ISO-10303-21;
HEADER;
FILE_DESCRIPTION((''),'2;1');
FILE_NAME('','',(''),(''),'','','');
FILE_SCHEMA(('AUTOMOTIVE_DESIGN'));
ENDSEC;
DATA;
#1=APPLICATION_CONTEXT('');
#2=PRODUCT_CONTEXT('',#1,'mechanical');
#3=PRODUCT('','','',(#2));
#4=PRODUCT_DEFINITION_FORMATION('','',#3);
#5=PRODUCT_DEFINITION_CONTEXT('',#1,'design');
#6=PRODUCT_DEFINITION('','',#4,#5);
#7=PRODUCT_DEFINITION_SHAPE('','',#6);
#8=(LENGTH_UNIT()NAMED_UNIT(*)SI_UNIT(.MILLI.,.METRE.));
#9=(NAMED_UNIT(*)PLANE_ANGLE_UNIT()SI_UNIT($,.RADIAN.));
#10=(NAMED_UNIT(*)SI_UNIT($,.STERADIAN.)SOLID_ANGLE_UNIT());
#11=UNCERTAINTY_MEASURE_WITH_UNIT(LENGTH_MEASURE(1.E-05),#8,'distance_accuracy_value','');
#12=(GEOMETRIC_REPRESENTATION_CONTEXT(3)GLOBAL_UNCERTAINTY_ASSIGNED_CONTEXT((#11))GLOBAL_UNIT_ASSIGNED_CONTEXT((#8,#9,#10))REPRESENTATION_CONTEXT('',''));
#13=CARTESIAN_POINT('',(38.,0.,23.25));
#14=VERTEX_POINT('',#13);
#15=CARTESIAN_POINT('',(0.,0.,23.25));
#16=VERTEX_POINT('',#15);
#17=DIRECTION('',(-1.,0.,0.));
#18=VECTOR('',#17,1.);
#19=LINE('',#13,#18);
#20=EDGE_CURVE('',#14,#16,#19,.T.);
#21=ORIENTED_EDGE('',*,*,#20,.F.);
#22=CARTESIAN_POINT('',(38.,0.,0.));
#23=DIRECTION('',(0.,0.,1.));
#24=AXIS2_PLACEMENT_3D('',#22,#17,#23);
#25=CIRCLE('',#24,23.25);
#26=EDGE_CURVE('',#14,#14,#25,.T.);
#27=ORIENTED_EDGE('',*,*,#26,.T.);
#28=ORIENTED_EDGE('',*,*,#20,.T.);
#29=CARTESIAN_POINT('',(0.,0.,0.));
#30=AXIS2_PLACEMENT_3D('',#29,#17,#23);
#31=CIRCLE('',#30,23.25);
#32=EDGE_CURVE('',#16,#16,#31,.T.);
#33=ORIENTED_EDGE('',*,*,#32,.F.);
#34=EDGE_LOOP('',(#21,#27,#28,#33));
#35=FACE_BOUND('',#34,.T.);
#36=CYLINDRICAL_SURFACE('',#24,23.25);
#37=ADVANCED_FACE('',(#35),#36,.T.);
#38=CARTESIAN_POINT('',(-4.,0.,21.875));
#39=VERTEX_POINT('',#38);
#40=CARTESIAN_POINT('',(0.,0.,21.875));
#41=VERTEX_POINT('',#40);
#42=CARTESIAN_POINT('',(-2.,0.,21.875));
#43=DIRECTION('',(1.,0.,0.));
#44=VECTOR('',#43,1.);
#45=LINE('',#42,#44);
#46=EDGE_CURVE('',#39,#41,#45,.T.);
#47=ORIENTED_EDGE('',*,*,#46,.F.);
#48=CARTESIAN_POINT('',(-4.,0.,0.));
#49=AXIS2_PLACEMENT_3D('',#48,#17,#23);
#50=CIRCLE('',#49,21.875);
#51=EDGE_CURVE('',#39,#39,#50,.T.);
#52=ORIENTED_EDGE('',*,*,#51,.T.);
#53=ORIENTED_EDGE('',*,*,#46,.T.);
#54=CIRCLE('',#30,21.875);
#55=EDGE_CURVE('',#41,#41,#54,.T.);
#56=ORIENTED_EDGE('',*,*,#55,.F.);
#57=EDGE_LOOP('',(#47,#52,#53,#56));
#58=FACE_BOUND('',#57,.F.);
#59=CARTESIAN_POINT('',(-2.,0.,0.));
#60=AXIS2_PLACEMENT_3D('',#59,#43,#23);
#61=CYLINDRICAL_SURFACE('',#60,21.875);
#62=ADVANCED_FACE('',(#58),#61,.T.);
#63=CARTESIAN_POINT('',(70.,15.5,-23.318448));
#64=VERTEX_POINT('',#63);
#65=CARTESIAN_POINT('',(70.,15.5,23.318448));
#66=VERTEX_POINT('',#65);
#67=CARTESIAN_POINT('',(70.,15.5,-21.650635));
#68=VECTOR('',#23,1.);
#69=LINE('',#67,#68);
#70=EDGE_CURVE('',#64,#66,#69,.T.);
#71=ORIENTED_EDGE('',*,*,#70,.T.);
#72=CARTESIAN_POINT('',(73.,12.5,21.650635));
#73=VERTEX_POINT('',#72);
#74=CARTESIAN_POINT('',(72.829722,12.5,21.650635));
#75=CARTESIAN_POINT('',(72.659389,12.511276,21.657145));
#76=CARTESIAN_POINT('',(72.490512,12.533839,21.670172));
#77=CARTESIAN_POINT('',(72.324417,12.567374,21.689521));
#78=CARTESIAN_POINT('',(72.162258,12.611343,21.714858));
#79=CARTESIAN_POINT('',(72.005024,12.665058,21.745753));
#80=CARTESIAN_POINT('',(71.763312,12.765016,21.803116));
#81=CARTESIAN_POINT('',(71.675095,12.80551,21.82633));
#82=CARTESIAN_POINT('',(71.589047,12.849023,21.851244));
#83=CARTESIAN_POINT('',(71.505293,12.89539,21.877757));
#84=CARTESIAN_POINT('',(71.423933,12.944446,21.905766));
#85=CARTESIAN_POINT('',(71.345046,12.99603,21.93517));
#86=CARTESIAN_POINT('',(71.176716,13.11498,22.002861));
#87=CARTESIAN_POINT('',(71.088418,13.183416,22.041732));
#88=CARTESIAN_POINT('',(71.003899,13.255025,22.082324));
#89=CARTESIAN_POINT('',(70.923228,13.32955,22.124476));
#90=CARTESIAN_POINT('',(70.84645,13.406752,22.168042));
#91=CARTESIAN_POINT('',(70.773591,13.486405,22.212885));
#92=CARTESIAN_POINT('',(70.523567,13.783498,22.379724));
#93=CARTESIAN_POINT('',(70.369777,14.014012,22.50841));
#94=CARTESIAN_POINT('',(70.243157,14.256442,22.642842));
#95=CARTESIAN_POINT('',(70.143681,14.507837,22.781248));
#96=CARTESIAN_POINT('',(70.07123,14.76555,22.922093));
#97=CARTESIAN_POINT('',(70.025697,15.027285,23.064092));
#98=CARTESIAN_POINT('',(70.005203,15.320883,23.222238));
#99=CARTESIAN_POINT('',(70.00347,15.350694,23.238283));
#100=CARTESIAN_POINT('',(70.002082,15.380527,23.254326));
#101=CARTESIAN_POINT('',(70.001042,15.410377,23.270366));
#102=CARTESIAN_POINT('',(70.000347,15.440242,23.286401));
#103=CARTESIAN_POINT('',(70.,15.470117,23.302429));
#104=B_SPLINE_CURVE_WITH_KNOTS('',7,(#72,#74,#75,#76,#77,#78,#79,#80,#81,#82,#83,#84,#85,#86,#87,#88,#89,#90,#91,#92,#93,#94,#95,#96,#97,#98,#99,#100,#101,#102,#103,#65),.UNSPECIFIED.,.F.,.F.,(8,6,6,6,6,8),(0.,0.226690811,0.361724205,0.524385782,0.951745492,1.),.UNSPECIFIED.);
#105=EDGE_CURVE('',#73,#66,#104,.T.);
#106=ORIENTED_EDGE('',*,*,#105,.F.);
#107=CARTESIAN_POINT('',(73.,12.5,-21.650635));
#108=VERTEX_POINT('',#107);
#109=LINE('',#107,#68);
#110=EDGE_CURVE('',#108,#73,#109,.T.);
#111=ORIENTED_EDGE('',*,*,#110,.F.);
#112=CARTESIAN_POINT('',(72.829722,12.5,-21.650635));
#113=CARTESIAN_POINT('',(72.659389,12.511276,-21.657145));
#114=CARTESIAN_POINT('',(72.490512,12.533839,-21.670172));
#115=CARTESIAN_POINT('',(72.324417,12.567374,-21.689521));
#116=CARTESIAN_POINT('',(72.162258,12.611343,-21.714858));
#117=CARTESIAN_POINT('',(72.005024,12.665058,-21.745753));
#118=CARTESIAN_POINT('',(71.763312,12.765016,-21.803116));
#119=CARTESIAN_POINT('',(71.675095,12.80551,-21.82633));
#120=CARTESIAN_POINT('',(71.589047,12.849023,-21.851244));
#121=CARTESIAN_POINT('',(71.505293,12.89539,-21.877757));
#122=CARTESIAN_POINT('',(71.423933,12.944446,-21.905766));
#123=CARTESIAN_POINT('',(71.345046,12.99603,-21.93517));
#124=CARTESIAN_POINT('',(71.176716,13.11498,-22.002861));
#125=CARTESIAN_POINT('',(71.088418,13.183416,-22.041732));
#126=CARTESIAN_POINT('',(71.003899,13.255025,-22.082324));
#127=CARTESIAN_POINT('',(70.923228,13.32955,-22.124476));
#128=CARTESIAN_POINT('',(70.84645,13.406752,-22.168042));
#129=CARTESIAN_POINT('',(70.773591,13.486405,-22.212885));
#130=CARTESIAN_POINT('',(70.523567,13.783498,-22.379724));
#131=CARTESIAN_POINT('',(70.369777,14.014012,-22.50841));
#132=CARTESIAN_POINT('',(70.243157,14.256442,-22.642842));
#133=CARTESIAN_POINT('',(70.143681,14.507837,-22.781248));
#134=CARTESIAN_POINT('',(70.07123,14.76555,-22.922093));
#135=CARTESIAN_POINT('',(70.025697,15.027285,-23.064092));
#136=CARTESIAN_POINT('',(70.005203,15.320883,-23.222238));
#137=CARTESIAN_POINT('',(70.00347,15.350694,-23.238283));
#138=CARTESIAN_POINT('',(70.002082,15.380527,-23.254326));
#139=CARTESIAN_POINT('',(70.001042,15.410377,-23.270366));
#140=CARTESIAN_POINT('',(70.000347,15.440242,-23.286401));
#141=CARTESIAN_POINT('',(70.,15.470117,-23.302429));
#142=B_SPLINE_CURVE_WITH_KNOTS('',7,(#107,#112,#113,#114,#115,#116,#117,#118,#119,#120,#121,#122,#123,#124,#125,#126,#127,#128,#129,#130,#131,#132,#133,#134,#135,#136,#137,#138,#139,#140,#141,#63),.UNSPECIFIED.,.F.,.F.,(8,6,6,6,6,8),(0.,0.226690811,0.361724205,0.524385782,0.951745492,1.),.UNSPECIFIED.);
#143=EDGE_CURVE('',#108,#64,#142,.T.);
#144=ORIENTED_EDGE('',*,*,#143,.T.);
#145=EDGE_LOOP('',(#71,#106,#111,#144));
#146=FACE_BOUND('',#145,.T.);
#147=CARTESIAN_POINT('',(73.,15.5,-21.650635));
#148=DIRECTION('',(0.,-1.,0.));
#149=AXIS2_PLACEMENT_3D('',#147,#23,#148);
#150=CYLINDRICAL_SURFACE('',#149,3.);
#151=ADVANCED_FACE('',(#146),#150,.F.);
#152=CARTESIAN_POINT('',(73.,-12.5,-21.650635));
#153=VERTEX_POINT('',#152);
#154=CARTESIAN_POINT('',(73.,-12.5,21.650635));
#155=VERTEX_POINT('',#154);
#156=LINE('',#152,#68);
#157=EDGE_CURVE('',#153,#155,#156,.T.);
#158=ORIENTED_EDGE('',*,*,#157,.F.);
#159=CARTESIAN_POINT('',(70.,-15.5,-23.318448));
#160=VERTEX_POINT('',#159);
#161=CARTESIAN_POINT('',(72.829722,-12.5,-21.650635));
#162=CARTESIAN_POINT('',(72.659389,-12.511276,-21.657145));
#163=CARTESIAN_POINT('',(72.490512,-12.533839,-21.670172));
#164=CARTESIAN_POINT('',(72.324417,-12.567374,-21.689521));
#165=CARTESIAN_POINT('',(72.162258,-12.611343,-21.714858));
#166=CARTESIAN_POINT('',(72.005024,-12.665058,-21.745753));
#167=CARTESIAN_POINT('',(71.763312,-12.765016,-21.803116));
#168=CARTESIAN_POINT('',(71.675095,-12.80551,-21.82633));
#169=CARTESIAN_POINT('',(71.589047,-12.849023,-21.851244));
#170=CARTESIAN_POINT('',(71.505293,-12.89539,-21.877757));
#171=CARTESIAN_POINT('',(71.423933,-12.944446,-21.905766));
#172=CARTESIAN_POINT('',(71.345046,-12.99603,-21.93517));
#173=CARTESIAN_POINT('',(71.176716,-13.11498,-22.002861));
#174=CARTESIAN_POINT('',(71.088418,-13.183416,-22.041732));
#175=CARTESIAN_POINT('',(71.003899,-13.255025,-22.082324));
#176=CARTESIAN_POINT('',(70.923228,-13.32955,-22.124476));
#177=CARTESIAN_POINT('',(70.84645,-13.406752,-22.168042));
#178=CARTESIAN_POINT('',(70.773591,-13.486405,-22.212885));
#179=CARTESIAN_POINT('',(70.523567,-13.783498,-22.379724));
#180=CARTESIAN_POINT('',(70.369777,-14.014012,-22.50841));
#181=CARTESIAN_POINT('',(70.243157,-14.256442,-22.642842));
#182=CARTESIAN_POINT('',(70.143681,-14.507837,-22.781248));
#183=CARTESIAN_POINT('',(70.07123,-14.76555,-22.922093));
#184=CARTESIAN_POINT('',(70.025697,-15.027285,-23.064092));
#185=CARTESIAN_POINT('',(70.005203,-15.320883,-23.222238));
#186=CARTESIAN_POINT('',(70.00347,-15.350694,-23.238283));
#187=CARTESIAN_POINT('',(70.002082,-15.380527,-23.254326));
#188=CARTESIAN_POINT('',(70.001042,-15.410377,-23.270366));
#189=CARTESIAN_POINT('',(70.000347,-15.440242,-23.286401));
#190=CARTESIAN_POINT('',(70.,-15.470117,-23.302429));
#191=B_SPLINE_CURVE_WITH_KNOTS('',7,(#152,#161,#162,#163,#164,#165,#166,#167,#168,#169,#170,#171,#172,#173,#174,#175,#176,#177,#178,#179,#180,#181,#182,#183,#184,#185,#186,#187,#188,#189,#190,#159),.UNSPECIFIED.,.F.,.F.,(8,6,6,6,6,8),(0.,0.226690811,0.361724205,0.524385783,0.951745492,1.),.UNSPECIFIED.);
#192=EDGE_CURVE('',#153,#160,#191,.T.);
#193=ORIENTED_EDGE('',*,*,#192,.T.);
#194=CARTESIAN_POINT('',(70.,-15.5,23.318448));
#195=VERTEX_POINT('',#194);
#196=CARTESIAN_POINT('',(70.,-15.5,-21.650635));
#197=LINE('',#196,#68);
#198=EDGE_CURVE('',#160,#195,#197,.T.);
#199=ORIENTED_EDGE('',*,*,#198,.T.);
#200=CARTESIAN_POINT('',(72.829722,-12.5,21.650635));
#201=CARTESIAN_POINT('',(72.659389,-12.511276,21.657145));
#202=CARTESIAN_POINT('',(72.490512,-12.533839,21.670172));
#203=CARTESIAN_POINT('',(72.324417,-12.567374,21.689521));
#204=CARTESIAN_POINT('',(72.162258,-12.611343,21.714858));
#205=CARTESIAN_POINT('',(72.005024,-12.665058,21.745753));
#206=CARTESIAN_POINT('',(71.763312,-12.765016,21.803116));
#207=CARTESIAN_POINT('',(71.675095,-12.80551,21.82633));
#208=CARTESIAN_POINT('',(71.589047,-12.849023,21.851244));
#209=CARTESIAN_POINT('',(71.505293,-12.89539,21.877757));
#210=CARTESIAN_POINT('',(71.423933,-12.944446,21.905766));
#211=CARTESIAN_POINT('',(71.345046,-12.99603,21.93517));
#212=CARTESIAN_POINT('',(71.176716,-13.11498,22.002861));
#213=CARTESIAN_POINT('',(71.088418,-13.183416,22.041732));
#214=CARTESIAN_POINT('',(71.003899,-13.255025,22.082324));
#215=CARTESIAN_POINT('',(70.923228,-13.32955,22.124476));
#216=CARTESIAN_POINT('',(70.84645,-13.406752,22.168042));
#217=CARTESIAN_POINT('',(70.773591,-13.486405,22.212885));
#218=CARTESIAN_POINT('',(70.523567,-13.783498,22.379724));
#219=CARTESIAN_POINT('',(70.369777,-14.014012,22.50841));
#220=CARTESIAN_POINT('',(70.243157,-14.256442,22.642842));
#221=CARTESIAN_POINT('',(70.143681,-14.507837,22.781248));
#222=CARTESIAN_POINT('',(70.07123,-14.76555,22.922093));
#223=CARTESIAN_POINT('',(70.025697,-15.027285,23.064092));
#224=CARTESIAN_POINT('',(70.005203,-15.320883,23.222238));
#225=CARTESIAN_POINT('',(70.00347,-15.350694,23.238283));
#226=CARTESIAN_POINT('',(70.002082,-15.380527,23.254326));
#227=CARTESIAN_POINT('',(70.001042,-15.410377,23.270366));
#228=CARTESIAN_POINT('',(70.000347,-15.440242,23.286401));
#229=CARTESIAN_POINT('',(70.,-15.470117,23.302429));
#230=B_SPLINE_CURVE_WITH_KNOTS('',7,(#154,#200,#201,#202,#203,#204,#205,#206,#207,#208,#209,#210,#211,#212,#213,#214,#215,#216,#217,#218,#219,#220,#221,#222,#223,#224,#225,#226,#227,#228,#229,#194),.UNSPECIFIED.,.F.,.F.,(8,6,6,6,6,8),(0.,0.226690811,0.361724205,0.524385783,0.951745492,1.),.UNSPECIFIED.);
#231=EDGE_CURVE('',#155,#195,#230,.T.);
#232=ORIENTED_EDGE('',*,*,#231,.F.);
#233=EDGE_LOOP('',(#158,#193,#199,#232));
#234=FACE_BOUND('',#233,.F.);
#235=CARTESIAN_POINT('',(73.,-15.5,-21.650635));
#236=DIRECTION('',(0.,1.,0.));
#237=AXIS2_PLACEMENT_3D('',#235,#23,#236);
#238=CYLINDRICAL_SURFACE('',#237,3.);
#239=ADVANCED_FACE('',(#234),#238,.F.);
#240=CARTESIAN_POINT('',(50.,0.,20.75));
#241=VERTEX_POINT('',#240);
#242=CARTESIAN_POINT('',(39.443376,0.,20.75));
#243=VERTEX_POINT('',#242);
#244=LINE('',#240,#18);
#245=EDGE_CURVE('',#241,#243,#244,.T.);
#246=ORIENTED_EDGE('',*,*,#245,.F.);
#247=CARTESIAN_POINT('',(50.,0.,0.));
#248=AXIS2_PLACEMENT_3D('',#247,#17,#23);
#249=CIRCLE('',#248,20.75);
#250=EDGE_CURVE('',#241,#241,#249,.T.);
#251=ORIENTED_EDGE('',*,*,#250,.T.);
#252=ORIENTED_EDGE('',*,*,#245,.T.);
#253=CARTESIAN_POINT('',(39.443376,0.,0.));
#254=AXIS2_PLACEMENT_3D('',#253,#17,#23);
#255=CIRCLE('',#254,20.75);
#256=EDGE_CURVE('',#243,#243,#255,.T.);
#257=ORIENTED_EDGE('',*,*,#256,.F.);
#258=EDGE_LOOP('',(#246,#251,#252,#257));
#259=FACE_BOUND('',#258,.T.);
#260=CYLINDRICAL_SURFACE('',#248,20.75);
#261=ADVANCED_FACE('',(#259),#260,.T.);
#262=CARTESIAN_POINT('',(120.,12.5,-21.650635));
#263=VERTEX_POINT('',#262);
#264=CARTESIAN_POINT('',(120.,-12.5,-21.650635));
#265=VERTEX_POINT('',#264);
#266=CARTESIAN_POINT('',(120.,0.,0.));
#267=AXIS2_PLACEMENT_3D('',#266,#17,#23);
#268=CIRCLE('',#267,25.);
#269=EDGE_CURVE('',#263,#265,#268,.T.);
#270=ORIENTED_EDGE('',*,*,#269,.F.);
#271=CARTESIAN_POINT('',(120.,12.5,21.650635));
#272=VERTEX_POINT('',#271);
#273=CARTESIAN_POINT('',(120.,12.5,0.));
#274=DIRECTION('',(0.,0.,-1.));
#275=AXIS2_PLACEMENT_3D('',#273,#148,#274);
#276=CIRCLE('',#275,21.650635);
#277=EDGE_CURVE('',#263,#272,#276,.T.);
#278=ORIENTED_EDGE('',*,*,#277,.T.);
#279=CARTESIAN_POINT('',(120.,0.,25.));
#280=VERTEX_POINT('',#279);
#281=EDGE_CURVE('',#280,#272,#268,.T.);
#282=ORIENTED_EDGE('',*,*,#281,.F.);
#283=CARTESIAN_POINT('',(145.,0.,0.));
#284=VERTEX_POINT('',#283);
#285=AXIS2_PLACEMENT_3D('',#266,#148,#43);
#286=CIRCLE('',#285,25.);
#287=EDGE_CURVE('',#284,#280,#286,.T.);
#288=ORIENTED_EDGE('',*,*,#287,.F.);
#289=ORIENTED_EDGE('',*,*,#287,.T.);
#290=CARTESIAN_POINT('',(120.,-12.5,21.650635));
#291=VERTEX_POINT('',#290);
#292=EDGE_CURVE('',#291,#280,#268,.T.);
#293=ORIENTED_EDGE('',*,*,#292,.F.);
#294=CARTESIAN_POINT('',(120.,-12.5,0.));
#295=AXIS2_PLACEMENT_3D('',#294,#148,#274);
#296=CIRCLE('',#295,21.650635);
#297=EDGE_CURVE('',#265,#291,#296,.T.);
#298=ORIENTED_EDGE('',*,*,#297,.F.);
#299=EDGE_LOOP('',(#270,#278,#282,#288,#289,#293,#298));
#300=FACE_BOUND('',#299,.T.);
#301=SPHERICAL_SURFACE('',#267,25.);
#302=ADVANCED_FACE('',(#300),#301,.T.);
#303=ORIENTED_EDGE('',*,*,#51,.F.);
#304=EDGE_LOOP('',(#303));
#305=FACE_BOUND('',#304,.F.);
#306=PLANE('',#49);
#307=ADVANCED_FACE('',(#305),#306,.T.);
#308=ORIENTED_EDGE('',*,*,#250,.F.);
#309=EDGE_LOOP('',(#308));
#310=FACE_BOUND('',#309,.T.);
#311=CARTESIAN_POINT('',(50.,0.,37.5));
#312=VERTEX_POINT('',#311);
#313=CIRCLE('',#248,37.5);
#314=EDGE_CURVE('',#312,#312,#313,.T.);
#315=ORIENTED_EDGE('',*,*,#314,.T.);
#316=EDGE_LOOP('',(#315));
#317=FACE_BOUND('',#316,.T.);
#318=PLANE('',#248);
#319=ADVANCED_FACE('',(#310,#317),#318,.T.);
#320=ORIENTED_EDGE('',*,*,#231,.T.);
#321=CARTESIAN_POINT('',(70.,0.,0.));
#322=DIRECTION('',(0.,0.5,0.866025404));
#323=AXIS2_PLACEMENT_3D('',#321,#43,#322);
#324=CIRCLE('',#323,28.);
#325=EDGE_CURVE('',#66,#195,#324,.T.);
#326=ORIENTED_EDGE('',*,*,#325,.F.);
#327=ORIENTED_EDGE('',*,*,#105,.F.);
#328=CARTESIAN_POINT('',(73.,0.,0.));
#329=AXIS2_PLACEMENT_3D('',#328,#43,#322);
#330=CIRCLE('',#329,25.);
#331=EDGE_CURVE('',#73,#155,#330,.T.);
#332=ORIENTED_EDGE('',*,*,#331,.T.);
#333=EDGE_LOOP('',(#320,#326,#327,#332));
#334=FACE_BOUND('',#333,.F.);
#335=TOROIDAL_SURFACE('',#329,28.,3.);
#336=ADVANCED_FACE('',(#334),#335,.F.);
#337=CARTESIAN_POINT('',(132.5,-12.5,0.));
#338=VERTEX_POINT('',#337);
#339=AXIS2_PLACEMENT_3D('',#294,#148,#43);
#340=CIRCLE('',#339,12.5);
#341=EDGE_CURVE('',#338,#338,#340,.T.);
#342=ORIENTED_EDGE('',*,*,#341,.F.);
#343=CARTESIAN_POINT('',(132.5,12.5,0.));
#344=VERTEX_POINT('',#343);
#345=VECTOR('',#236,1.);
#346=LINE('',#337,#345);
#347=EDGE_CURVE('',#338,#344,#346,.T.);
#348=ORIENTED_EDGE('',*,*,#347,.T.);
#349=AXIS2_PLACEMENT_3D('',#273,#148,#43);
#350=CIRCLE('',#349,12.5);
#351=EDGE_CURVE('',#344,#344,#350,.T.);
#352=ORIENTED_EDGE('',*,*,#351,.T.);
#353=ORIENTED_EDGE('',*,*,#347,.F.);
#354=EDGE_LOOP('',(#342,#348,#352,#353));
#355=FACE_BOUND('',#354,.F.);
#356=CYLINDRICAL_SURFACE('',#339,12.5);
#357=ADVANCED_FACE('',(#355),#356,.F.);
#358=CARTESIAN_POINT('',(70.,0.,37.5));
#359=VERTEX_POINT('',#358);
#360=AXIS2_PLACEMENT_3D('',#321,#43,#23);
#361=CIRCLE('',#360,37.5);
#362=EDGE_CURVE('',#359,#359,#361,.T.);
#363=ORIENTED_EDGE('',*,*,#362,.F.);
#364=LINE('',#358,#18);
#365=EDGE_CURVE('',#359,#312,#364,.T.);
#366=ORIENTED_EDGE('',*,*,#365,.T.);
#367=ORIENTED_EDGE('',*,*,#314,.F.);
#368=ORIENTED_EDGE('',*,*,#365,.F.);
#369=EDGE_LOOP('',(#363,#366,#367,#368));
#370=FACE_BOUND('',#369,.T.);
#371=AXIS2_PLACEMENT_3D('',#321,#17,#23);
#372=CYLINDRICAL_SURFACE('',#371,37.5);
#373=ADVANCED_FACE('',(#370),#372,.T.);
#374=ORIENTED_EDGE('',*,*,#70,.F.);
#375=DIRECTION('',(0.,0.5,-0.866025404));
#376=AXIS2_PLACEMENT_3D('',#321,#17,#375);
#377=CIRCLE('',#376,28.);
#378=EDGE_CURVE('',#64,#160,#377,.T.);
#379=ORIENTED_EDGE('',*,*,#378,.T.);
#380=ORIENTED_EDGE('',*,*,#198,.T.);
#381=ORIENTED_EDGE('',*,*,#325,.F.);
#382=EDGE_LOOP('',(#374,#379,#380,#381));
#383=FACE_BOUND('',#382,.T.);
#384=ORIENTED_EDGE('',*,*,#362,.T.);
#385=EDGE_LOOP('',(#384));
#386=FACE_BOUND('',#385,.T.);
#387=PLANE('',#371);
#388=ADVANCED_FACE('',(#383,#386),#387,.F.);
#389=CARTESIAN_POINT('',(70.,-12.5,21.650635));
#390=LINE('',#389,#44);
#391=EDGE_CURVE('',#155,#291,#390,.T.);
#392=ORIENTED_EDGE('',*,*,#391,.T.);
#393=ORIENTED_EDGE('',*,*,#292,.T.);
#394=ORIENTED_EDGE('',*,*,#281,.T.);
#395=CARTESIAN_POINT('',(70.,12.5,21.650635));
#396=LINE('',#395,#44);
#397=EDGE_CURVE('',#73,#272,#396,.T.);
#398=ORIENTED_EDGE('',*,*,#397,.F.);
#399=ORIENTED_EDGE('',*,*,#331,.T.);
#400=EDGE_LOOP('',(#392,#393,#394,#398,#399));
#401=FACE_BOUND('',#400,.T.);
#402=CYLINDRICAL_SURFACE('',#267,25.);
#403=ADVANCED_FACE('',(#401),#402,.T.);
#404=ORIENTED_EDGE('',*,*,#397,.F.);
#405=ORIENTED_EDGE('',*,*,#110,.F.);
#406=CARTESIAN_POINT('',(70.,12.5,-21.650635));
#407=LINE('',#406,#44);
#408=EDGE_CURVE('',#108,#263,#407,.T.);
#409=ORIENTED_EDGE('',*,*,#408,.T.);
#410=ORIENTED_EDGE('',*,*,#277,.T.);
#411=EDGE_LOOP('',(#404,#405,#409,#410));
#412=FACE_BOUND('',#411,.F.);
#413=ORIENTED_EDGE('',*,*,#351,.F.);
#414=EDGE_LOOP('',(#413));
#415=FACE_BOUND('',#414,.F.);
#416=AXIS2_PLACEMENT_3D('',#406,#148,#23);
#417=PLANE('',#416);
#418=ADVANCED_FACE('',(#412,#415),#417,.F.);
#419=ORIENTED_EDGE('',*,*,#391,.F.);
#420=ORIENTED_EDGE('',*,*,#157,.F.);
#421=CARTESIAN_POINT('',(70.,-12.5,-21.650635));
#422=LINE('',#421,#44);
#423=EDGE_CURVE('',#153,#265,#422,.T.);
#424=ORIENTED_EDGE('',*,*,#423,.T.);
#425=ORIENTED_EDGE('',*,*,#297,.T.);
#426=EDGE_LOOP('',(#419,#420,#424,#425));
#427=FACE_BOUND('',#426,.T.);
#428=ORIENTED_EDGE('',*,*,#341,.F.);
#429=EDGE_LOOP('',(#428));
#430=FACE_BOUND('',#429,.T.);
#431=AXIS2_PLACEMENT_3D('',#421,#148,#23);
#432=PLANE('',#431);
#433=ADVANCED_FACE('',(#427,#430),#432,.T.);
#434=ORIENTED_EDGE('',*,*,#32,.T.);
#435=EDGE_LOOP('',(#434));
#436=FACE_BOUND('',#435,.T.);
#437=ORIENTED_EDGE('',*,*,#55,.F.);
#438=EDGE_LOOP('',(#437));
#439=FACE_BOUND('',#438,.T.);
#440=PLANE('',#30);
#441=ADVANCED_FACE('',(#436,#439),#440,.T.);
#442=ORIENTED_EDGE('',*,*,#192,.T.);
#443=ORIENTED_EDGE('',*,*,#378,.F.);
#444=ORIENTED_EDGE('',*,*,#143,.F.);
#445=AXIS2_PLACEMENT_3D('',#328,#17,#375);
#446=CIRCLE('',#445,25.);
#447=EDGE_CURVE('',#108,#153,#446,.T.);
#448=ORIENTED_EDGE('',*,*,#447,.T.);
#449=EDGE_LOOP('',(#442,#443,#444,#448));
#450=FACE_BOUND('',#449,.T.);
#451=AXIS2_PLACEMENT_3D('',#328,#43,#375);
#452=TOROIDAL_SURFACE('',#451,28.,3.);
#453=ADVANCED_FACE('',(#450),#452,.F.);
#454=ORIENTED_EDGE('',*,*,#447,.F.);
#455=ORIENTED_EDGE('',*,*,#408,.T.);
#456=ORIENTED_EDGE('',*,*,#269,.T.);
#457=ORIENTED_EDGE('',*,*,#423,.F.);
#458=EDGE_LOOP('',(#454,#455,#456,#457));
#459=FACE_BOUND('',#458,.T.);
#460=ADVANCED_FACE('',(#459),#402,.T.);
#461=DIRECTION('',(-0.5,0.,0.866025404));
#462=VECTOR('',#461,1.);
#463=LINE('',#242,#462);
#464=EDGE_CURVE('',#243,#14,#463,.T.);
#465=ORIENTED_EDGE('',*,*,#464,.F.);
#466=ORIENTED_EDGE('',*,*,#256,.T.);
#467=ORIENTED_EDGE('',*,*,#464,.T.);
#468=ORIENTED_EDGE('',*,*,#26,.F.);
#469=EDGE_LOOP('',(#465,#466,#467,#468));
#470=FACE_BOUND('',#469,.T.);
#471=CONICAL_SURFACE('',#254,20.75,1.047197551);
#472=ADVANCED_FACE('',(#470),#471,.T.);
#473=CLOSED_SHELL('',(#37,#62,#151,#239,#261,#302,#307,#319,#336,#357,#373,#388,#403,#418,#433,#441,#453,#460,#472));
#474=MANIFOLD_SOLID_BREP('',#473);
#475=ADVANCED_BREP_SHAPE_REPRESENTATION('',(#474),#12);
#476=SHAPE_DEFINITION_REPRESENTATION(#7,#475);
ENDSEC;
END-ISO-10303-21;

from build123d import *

# Parameters (mm, degrees)
F1_W     = 4
F1_H     = 21.875
F3_W     = 25
F3_H     = 43.3012701892
F4_DEPTH = 75
F5_R     = 12.5
F6_DEPTH = 25
F7_R     = 3


# Not quite as in the source:
# - a feature names something its author has since deleted; it is built from what else it names


with BuildPart() as f2:
    # F1 (on Front) → F2 (revolve)
    with BuildSketch(Plane.XZ):
        with BuildLine():
            Line((0, 21.875), (0, 0))
            Line((0, 0), (145, 0))
            ThreePointArc((145, 0), (137.6776695297, 17.6776695297), (120, 25))
            Line((120, 25), (70, 25))
            Line((70, 25), (70, 37.5))
            Line((70, 37.5), (50, 37.5))
            Line((50, 37.5), (50, 20.75))
            Line((50, 20.75), (39.443375673, 20.75))
            Line((39.443375673, 20.75), (38, 20.75))
            Line((38, 20.75), (38, 23.25))
            Line((38, 23.25), (0, 23.25))
            Line((0, 23.25), (0, 21.875))
        make_face()
        Polygon((39.443375673, 20.75), (38, 23.25), (38, 20.75), align=None)
        with Locations((-2, 10.9375)):
            Rectangle(F1_W, F1_H)
    revolve(axis=Axis((72.5, 0, 0), (-1, 0, 0)))

    # F3 (on face) → F4 (cut)
    with BuildSketch(Plane.YZ.offset(70)):
        with Locations((-25, 0)):
            Rectangle(F3_W, F3_H)
        with Locations((25, 0)):
            Rectangle(F3_W, F3_H)
    extrude(amount=F4_DEPTH, mode=Mode.SUBTRACT)

    # F5 (on face) → F6 (cut, through all)
    with BuildSketch(Plane.XZ.offset(12.5)):
        with Locations((120, 0)):
            Circle(F5_R)
    extrude(amount=-F6_DEPTH, mode=Mode.SUBTRACT)

    # F7
    f7_edges = [f2.edges().sort_by_distance(p)[0] for p in [
        (70, -12.5, 0),
        (70, 12.5, 0),
        (70, 0, 25),
        (70, 0, -25),
    ]]
    fillet(f7_edges, radius=F7_R)


solid = f2.part
